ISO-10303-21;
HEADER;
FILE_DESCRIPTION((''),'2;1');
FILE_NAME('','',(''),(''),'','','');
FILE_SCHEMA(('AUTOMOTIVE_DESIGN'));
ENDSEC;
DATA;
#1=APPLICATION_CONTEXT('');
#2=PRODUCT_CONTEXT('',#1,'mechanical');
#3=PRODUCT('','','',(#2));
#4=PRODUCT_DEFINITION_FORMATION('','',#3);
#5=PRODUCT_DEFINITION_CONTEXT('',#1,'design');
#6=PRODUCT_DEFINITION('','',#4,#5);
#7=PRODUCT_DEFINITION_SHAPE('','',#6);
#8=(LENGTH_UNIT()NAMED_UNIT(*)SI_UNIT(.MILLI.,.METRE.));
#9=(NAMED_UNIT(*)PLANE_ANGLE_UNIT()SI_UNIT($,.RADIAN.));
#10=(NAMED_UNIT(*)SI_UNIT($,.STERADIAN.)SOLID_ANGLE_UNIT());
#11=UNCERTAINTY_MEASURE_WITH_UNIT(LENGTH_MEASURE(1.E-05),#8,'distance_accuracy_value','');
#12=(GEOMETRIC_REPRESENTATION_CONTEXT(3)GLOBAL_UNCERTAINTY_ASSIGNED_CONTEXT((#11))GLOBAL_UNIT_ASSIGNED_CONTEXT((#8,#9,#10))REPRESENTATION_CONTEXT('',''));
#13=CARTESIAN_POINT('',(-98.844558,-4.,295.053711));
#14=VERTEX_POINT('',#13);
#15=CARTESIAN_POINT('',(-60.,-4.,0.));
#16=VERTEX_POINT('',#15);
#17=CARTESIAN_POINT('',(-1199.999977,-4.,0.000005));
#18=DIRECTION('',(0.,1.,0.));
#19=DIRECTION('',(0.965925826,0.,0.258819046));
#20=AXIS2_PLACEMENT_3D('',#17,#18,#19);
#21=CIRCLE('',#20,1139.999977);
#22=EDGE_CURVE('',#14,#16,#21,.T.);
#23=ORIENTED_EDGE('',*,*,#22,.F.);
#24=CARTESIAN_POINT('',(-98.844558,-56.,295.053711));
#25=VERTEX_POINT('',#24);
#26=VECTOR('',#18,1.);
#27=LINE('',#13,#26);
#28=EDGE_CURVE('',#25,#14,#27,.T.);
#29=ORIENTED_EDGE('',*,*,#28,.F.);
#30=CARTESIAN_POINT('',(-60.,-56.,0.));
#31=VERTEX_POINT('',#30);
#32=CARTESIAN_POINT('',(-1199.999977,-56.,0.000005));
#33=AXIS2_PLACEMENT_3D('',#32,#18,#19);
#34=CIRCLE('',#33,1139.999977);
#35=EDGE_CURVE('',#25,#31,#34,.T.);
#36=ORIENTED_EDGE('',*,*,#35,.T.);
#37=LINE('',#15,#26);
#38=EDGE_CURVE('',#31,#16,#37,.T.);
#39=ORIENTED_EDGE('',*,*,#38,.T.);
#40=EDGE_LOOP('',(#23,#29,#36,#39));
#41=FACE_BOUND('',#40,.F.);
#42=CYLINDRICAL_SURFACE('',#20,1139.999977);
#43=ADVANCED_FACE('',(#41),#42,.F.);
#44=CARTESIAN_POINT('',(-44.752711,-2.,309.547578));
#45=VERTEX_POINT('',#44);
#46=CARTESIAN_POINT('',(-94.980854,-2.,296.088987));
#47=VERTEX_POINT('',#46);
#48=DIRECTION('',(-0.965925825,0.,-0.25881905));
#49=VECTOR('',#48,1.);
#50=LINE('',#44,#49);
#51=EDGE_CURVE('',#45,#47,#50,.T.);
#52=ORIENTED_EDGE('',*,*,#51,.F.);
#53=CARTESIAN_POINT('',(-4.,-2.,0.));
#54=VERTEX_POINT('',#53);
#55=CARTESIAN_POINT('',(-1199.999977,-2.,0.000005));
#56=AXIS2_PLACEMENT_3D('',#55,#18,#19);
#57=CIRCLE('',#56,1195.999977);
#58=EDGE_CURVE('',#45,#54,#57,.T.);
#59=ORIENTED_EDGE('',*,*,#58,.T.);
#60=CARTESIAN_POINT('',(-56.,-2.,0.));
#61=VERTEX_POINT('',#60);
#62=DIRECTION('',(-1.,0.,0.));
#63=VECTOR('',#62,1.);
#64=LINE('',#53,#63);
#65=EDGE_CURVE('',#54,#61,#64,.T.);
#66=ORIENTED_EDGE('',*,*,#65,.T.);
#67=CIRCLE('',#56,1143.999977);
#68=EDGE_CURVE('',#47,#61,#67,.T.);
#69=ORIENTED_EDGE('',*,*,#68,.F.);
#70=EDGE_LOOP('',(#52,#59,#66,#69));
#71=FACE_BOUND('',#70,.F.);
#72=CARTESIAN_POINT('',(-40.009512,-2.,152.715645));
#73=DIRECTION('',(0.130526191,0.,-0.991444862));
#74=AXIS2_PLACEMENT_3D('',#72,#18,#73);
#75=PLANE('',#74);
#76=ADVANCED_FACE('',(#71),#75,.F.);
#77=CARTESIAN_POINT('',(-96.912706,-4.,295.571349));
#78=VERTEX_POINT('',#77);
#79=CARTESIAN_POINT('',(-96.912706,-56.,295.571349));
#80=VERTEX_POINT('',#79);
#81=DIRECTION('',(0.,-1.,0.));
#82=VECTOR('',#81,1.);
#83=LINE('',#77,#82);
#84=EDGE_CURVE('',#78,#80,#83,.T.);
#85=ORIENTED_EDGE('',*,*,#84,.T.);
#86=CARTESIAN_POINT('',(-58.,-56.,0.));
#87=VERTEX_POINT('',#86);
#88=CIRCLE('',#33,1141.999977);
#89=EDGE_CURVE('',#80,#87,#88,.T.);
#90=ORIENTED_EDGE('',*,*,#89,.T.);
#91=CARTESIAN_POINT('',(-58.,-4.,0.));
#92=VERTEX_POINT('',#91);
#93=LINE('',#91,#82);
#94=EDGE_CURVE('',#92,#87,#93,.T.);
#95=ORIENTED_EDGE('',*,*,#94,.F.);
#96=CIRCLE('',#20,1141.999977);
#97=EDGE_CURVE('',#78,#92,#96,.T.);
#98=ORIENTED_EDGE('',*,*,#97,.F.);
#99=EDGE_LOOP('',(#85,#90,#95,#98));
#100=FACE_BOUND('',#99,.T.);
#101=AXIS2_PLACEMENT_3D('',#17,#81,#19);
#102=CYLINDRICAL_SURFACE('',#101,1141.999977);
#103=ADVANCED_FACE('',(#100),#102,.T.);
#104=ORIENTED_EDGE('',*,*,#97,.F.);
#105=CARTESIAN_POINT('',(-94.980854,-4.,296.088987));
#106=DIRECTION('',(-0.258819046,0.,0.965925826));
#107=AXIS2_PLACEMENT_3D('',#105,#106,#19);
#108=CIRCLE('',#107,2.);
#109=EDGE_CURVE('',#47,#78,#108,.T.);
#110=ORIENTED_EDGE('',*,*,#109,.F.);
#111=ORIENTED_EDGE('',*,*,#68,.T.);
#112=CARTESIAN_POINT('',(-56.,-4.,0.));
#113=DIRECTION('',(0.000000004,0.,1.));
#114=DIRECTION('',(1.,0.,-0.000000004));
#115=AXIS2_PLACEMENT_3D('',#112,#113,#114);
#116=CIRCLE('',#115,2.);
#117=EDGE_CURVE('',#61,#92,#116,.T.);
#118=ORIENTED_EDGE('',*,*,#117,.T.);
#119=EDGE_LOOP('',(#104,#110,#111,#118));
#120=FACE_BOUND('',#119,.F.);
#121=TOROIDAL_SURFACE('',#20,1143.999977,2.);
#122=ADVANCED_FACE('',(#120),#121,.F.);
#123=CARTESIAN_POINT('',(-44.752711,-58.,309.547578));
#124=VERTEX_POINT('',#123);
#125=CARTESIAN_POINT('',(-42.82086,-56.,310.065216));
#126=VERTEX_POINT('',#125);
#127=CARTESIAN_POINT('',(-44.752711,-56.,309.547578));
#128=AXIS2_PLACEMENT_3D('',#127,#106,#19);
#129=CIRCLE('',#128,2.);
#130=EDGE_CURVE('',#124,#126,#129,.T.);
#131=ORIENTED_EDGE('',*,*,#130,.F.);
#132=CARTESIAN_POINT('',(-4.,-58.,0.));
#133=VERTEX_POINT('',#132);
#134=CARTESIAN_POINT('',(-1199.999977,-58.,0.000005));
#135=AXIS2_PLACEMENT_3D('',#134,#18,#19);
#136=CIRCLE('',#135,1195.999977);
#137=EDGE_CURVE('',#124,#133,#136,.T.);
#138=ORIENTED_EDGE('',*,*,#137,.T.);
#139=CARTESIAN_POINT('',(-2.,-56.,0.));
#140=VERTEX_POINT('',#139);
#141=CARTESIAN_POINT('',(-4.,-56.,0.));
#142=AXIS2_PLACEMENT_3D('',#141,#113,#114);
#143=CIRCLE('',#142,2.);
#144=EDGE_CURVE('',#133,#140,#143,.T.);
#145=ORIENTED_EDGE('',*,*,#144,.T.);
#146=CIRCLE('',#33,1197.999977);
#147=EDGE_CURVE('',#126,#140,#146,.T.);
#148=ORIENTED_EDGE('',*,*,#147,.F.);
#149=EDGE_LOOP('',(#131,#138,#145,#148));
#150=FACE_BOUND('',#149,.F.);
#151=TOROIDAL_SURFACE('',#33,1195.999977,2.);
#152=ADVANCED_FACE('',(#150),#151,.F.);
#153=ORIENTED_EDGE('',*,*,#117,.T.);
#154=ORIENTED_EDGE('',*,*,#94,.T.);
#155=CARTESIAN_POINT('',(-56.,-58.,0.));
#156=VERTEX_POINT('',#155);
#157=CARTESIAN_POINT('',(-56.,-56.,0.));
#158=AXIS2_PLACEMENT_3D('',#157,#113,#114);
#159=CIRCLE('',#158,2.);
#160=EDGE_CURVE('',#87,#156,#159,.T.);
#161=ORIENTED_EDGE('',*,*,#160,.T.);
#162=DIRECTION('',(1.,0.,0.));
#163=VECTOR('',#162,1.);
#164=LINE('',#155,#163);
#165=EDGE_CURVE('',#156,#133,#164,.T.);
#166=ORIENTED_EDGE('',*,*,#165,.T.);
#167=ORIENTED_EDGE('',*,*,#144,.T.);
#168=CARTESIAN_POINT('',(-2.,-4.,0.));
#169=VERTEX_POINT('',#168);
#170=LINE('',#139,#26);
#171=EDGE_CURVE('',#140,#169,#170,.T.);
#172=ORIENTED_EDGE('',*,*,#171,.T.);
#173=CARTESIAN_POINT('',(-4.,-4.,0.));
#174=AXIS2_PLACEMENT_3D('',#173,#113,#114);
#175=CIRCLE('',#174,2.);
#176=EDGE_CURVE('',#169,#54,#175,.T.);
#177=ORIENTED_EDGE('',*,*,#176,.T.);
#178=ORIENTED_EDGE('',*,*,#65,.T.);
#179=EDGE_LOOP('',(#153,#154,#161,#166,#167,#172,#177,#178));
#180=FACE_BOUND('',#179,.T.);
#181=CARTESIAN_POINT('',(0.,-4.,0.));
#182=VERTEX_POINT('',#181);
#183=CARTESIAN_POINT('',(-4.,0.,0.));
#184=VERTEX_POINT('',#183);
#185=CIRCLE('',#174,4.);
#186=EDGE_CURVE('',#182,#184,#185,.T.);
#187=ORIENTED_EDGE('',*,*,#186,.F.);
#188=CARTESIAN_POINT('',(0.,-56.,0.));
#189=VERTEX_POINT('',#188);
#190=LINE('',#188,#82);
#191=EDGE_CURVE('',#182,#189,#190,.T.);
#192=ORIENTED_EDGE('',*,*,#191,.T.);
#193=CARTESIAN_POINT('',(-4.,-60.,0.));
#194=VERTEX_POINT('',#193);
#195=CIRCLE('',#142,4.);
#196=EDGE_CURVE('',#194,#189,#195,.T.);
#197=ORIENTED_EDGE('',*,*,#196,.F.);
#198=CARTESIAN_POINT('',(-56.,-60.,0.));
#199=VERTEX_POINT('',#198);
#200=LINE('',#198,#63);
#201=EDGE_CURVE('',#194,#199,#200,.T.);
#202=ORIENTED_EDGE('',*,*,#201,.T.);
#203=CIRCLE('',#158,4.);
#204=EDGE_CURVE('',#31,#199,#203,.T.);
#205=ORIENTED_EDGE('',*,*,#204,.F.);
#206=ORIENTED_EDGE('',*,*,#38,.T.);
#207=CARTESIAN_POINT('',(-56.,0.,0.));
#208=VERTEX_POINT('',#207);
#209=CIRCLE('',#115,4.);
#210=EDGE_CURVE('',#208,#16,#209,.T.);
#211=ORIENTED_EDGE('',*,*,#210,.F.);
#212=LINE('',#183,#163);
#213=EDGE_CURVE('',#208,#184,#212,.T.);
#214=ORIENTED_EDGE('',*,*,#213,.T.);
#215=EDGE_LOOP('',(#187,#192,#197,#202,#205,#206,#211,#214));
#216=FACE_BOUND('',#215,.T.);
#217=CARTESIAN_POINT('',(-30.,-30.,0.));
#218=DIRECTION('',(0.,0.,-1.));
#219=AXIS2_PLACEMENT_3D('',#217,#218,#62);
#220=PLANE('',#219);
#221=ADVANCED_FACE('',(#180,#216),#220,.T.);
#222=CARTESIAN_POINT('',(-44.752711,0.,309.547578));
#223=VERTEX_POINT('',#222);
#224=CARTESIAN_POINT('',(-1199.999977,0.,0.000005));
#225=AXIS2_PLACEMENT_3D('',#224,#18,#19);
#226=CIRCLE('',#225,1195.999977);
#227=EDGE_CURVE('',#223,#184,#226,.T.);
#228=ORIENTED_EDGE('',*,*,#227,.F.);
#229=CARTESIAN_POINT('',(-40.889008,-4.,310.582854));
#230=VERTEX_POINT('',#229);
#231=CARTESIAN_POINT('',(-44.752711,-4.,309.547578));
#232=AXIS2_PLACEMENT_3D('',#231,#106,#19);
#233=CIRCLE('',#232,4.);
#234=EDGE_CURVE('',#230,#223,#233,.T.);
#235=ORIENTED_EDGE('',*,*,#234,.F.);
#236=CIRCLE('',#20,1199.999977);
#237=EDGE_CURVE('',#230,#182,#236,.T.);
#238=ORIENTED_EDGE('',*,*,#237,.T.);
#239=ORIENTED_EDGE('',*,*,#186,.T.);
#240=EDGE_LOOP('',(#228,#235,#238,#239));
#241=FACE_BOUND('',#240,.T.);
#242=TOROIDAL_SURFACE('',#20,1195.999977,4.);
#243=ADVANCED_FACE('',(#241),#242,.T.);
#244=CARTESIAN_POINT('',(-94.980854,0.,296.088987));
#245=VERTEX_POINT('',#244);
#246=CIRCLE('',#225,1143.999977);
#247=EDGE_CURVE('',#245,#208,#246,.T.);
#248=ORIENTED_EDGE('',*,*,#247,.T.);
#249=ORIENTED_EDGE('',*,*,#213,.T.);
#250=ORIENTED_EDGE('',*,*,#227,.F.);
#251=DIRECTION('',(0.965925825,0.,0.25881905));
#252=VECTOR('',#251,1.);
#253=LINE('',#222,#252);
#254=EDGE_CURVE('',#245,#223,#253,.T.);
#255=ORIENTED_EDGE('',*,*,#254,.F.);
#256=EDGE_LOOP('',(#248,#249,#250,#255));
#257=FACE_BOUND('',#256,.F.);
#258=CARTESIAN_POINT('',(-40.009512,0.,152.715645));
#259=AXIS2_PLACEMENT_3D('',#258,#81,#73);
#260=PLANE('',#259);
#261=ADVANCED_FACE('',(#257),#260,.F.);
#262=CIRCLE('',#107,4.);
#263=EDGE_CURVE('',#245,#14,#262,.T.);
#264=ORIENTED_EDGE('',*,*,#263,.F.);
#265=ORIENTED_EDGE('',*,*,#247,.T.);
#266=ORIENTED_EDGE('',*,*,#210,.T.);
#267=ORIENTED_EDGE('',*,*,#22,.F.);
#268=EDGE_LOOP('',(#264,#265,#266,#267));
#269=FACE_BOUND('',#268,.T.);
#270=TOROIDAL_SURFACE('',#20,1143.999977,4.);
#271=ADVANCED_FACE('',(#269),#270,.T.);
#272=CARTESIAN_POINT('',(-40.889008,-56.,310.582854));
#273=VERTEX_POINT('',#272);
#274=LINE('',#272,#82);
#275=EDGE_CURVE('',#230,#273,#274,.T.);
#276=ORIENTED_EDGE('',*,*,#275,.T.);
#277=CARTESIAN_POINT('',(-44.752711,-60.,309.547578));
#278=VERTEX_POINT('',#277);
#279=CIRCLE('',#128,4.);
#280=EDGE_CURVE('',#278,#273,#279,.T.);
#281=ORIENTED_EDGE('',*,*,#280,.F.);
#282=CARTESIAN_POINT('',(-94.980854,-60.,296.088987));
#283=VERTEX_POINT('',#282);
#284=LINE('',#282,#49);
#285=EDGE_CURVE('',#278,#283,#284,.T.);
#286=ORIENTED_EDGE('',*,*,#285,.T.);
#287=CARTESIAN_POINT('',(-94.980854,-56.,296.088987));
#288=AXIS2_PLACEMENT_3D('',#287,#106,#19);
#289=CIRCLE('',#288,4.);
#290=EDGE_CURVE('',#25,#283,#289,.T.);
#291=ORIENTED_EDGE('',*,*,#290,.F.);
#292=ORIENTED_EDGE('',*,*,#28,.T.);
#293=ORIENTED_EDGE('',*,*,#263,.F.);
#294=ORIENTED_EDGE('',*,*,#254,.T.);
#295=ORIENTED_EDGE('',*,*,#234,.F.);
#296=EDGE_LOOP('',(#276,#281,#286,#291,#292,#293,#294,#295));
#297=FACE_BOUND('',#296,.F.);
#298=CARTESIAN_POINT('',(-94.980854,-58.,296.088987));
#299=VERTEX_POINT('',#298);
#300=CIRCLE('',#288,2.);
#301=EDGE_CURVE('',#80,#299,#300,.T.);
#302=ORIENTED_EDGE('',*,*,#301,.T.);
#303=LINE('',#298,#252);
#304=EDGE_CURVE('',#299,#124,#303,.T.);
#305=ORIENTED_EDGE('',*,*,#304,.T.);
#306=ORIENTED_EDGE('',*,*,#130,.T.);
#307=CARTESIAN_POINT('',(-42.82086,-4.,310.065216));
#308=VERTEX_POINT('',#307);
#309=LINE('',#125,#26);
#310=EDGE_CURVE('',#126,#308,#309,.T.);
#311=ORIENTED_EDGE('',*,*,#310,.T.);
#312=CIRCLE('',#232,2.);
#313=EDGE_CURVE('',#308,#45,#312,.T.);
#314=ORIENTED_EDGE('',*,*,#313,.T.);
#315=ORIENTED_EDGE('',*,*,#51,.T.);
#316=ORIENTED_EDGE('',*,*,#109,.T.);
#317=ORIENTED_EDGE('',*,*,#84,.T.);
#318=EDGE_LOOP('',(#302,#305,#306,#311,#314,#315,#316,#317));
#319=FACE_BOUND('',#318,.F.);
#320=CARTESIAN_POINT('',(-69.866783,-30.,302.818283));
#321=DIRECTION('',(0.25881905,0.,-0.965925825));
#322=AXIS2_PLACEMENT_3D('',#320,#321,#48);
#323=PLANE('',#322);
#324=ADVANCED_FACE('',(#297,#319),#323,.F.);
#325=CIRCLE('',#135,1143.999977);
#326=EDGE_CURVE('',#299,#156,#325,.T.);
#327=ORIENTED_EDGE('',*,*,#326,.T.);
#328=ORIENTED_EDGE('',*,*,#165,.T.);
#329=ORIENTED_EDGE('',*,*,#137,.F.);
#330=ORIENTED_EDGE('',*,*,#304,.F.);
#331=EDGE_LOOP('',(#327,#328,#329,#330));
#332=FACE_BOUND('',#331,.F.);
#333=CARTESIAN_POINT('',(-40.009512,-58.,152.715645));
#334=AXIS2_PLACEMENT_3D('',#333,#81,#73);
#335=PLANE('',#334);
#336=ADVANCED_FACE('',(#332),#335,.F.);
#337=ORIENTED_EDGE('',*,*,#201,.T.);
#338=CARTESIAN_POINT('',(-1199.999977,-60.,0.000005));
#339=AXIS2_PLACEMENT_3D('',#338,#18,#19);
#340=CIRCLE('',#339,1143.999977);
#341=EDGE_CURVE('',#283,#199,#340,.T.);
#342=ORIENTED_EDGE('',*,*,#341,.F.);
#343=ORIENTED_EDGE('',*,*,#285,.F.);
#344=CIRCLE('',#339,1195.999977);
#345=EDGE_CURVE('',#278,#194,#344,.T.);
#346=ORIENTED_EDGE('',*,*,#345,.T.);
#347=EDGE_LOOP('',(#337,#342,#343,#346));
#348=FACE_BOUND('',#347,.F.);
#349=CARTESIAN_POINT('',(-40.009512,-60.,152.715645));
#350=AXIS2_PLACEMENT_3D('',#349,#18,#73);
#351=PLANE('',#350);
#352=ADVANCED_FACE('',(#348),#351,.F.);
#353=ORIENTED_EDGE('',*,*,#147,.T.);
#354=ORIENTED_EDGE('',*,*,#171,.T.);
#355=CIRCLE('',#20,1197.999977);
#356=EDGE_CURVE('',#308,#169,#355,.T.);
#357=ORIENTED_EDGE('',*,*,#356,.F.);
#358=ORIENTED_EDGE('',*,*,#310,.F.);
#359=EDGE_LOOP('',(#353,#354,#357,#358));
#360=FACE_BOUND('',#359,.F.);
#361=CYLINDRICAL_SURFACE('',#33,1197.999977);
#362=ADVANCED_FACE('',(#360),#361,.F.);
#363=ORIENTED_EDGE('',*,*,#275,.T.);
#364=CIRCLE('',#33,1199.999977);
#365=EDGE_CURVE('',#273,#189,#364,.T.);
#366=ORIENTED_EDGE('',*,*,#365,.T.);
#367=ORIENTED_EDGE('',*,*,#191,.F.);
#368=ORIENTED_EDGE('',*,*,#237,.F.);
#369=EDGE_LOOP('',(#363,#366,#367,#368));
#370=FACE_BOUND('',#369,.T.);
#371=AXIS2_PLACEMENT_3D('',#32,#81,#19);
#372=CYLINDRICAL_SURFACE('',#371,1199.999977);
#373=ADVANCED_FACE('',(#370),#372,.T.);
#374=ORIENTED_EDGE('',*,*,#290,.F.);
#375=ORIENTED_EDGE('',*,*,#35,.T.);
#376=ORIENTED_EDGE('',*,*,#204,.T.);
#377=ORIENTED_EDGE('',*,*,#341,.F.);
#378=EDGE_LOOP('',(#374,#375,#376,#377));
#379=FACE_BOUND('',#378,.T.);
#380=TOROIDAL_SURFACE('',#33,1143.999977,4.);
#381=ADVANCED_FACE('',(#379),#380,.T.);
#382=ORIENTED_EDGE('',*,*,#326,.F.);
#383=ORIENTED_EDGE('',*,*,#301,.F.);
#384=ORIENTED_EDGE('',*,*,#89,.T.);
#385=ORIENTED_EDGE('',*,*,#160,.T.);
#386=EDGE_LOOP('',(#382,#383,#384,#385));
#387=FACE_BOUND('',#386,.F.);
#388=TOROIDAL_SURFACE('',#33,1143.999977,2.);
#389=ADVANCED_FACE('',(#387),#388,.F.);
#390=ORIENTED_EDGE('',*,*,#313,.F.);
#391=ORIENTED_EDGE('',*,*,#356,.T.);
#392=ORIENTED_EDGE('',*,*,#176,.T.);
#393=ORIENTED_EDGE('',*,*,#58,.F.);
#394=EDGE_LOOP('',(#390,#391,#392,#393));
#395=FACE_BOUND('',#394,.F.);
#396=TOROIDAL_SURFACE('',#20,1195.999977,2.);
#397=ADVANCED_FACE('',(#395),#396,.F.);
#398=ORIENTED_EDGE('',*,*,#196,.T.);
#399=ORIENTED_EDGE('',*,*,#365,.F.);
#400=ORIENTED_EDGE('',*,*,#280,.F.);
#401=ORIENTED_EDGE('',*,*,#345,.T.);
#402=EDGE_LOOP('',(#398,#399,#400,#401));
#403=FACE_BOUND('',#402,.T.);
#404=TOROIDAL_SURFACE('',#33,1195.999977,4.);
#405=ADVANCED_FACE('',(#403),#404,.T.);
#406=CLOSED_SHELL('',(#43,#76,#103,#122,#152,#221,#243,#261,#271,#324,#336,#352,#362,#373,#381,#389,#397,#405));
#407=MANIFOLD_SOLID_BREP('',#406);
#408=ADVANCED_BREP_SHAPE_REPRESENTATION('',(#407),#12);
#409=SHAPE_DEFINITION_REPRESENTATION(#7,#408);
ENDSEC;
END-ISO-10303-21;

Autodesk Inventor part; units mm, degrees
ref_plane "Start plane" through (0, 0, 0) normal (0, 0, 1) x (1, 0, 0)
ref_plane "End plane" through (0, 0, 306.305284) normal (0, 0, 1) x (1, 0, 0)
sketch "Sketch" plane through (-30, -30, 0) normal (0, 0, -1) x (-1, 0, 0)
  line L0 (-30, -26) -> (-30, 26)
  line L1 (-26, 30) -> (26, 30)
  line L2 (30, 26) -> (30, -26)
  line L3 (26, -30) -> (-26, -30)
  arc A0 (-30, -26) -> (-26, -30) centre (-26, -26) ccw
  arc A1 (30, 26) -> (26, 30) centre (26, 26) ccw
  arc A2 (-26, 30) -> (-30, 26) centre (-26, 26) ccw
  arc A3 (26, -30) -> (30, -26) centre (26, -26) ccw
  arc A4 (-26, 28) -> (-28, 26) centre (-26, 26) ccw
  line L4 (-26, 28) -> (26, 28)
  arc A5 (28, 26) -> (26, 28) centre (26, 26) ccw
  line L5 (28, 26) -> (28, -26)
  arc A6 (26, -28) -> (28, -26) centre (26, -26) ccw
  line L6 (26, -28) -> (-26, -28)
  arc A7 (-28, -26) -> (-26, -28) centre (-26, -26) ccw
  line L7 (-28, -26) -> (-28, 26)
  line L8 (0, 37.102134) -> (0, -37.102134) construction
  line L9 (-23.102134, 0) -> (23.102134, 0) construction
  dimension "d7" = 4
  dimension "d9" = 60
  dimension "d11" = 60
  dimension "d12" = 2
  dimension "d15" = 30
  dimension "d16" = 30
sketch "Sketch3" plane through (0, 0, 0) normal (0, 0, 1) x (1, 0, 0)
  line L0 (0, 0) -> (10, 0)
ref_plane "Work Plane3" through (0, 0, 0) normal (0, -1, 0) x (1, 0, 0)
sketch "Sketch4" plane through (0, 0, 0) normal (0, -1, 0) x (1, 0, 0)
  line L0 (-2, 0) -> (12, 0)
  line L1 (-120.61347, 306.305284) -> (31.768912, 306.305284)
  dimension "d18" = 306.30528
ref_plane "Orientation Work Plane" through (-30, -30, 0) normal (0, 0, -1) x (-1, 0, 0)
sketch3d "Sweep Path"
  arc A0 (-40.889008, 0, 310.582854) -> (0, 0, 0) centre (-1200, 0, 0) ccw
sweep "Body" add profiles "Sketch" path "Sweep Path"
equation "\"d7\" = G_IR"
equation "\"d9\" = G_W"
equation "\"d11\" = G_H"
equation "\"d12\" = G_T"
equation "\"d15\" = 0.5 * d9"
equation "\"d16\" = 0.5 * d11"
equation "\"G_W\" = 60"
equation "\"G_H\" = 60"
equation "\"G_T\" = 2"
equation "\"G_IR\" = 4"
equation "\"G_L\" = d18"
equation "\"G_OFFSET_START\" = 0"
equation "\"G_OFFSET_END\" = 0"
equation "\"d14\" = G_OFFSET_END + B_L"
equation "\"B_L\" = 306.30528"
properties part number "ISO 4019 - 60x60x2 - 306.305" material "Steel, Mild"
